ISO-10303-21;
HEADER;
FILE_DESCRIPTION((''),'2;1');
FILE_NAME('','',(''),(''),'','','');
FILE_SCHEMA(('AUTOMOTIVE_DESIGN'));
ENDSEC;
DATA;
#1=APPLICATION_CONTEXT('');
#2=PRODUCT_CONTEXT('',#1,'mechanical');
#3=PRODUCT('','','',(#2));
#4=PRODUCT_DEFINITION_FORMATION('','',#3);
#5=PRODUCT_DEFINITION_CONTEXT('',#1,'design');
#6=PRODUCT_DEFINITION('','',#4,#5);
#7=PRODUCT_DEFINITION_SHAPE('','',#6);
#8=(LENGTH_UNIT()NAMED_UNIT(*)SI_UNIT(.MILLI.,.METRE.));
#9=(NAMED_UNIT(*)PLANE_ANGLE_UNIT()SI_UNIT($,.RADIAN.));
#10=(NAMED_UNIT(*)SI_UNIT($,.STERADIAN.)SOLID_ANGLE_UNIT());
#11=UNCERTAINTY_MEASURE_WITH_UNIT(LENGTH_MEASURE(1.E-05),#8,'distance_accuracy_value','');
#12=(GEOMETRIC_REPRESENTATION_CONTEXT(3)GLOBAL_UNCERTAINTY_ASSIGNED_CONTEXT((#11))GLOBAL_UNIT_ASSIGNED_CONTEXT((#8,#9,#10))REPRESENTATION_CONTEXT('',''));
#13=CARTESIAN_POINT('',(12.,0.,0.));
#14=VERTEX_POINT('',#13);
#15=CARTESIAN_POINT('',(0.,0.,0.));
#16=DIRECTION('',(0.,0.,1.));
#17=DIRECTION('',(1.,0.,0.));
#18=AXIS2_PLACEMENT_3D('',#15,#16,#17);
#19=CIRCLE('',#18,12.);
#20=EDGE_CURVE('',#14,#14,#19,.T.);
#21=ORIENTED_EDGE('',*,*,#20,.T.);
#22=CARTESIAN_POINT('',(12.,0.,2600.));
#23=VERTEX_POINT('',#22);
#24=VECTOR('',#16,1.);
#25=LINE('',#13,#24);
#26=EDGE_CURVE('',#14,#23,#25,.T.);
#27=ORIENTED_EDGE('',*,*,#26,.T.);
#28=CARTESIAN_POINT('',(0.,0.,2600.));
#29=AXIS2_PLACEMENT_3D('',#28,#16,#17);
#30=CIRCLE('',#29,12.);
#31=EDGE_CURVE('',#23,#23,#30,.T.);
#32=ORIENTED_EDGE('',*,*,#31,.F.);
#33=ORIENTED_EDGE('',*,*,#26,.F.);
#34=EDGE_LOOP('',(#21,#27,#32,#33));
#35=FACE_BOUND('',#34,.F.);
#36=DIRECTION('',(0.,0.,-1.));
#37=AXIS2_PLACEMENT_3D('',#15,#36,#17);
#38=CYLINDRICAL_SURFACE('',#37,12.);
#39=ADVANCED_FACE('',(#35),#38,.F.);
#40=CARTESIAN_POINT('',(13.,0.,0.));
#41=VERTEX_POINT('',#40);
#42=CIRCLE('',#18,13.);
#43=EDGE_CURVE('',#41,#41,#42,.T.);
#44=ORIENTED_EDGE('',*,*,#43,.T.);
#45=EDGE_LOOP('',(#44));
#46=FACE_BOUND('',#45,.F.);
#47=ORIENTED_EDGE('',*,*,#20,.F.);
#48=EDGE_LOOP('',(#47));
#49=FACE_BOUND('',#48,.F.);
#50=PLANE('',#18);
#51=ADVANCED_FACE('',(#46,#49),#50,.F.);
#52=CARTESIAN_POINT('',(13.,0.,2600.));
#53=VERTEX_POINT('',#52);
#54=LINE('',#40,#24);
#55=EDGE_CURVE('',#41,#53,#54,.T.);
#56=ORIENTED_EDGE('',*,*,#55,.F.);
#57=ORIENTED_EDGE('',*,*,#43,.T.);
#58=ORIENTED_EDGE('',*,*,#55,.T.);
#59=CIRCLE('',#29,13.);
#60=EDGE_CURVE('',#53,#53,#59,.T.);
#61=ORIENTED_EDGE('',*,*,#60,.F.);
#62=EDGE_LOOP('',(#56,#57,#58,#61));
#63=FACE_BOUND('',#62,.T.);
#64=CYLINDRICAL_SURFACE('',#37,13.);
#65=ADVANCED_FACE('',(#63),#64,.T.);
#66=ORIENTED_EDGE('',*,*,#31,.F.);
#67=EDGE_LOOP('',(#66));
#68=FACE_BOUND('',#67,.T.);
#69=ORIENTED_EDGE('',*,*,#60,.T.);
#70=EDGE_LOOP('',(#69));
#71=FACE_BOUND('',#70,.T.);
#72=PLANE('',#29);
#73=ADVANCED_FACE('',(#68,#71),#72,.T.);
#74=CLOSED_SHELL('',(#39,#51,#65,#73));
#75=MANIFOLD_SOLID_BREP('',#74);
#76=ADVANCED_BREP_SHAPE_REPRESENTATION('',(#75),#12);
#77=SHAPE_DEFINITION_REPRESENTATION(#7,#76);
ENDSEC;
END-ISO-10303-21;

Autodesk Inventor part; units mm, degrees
ref_plane "YZ Plane" through (0, 0, 0) normal (1, 0, 0) x (0, 1, 0)
ref_plane "XZ Plane" through (0, 0, 0) normal (0, 1, 0) x (-1, 0, 0)
ref_plane "XY Plane" through (0, 0, 0) normal (0, 0, 1) x (1, 0, 0)
sketch "Sketch1" plane through (0, 0, 0) normal (0, 0, 1) x (1, 0, 0)
  circle A0 centre (0, 0) radius 13
  circle A1 centre (0, 0) radius 12
  dimension "d0" = 26
  dimension "d1" = 24
extrude "Extrusion1" add sketch "Sketch1" along normal blind 2600
properties part number "tubo base" material "Aluminum 6061-AHC"
